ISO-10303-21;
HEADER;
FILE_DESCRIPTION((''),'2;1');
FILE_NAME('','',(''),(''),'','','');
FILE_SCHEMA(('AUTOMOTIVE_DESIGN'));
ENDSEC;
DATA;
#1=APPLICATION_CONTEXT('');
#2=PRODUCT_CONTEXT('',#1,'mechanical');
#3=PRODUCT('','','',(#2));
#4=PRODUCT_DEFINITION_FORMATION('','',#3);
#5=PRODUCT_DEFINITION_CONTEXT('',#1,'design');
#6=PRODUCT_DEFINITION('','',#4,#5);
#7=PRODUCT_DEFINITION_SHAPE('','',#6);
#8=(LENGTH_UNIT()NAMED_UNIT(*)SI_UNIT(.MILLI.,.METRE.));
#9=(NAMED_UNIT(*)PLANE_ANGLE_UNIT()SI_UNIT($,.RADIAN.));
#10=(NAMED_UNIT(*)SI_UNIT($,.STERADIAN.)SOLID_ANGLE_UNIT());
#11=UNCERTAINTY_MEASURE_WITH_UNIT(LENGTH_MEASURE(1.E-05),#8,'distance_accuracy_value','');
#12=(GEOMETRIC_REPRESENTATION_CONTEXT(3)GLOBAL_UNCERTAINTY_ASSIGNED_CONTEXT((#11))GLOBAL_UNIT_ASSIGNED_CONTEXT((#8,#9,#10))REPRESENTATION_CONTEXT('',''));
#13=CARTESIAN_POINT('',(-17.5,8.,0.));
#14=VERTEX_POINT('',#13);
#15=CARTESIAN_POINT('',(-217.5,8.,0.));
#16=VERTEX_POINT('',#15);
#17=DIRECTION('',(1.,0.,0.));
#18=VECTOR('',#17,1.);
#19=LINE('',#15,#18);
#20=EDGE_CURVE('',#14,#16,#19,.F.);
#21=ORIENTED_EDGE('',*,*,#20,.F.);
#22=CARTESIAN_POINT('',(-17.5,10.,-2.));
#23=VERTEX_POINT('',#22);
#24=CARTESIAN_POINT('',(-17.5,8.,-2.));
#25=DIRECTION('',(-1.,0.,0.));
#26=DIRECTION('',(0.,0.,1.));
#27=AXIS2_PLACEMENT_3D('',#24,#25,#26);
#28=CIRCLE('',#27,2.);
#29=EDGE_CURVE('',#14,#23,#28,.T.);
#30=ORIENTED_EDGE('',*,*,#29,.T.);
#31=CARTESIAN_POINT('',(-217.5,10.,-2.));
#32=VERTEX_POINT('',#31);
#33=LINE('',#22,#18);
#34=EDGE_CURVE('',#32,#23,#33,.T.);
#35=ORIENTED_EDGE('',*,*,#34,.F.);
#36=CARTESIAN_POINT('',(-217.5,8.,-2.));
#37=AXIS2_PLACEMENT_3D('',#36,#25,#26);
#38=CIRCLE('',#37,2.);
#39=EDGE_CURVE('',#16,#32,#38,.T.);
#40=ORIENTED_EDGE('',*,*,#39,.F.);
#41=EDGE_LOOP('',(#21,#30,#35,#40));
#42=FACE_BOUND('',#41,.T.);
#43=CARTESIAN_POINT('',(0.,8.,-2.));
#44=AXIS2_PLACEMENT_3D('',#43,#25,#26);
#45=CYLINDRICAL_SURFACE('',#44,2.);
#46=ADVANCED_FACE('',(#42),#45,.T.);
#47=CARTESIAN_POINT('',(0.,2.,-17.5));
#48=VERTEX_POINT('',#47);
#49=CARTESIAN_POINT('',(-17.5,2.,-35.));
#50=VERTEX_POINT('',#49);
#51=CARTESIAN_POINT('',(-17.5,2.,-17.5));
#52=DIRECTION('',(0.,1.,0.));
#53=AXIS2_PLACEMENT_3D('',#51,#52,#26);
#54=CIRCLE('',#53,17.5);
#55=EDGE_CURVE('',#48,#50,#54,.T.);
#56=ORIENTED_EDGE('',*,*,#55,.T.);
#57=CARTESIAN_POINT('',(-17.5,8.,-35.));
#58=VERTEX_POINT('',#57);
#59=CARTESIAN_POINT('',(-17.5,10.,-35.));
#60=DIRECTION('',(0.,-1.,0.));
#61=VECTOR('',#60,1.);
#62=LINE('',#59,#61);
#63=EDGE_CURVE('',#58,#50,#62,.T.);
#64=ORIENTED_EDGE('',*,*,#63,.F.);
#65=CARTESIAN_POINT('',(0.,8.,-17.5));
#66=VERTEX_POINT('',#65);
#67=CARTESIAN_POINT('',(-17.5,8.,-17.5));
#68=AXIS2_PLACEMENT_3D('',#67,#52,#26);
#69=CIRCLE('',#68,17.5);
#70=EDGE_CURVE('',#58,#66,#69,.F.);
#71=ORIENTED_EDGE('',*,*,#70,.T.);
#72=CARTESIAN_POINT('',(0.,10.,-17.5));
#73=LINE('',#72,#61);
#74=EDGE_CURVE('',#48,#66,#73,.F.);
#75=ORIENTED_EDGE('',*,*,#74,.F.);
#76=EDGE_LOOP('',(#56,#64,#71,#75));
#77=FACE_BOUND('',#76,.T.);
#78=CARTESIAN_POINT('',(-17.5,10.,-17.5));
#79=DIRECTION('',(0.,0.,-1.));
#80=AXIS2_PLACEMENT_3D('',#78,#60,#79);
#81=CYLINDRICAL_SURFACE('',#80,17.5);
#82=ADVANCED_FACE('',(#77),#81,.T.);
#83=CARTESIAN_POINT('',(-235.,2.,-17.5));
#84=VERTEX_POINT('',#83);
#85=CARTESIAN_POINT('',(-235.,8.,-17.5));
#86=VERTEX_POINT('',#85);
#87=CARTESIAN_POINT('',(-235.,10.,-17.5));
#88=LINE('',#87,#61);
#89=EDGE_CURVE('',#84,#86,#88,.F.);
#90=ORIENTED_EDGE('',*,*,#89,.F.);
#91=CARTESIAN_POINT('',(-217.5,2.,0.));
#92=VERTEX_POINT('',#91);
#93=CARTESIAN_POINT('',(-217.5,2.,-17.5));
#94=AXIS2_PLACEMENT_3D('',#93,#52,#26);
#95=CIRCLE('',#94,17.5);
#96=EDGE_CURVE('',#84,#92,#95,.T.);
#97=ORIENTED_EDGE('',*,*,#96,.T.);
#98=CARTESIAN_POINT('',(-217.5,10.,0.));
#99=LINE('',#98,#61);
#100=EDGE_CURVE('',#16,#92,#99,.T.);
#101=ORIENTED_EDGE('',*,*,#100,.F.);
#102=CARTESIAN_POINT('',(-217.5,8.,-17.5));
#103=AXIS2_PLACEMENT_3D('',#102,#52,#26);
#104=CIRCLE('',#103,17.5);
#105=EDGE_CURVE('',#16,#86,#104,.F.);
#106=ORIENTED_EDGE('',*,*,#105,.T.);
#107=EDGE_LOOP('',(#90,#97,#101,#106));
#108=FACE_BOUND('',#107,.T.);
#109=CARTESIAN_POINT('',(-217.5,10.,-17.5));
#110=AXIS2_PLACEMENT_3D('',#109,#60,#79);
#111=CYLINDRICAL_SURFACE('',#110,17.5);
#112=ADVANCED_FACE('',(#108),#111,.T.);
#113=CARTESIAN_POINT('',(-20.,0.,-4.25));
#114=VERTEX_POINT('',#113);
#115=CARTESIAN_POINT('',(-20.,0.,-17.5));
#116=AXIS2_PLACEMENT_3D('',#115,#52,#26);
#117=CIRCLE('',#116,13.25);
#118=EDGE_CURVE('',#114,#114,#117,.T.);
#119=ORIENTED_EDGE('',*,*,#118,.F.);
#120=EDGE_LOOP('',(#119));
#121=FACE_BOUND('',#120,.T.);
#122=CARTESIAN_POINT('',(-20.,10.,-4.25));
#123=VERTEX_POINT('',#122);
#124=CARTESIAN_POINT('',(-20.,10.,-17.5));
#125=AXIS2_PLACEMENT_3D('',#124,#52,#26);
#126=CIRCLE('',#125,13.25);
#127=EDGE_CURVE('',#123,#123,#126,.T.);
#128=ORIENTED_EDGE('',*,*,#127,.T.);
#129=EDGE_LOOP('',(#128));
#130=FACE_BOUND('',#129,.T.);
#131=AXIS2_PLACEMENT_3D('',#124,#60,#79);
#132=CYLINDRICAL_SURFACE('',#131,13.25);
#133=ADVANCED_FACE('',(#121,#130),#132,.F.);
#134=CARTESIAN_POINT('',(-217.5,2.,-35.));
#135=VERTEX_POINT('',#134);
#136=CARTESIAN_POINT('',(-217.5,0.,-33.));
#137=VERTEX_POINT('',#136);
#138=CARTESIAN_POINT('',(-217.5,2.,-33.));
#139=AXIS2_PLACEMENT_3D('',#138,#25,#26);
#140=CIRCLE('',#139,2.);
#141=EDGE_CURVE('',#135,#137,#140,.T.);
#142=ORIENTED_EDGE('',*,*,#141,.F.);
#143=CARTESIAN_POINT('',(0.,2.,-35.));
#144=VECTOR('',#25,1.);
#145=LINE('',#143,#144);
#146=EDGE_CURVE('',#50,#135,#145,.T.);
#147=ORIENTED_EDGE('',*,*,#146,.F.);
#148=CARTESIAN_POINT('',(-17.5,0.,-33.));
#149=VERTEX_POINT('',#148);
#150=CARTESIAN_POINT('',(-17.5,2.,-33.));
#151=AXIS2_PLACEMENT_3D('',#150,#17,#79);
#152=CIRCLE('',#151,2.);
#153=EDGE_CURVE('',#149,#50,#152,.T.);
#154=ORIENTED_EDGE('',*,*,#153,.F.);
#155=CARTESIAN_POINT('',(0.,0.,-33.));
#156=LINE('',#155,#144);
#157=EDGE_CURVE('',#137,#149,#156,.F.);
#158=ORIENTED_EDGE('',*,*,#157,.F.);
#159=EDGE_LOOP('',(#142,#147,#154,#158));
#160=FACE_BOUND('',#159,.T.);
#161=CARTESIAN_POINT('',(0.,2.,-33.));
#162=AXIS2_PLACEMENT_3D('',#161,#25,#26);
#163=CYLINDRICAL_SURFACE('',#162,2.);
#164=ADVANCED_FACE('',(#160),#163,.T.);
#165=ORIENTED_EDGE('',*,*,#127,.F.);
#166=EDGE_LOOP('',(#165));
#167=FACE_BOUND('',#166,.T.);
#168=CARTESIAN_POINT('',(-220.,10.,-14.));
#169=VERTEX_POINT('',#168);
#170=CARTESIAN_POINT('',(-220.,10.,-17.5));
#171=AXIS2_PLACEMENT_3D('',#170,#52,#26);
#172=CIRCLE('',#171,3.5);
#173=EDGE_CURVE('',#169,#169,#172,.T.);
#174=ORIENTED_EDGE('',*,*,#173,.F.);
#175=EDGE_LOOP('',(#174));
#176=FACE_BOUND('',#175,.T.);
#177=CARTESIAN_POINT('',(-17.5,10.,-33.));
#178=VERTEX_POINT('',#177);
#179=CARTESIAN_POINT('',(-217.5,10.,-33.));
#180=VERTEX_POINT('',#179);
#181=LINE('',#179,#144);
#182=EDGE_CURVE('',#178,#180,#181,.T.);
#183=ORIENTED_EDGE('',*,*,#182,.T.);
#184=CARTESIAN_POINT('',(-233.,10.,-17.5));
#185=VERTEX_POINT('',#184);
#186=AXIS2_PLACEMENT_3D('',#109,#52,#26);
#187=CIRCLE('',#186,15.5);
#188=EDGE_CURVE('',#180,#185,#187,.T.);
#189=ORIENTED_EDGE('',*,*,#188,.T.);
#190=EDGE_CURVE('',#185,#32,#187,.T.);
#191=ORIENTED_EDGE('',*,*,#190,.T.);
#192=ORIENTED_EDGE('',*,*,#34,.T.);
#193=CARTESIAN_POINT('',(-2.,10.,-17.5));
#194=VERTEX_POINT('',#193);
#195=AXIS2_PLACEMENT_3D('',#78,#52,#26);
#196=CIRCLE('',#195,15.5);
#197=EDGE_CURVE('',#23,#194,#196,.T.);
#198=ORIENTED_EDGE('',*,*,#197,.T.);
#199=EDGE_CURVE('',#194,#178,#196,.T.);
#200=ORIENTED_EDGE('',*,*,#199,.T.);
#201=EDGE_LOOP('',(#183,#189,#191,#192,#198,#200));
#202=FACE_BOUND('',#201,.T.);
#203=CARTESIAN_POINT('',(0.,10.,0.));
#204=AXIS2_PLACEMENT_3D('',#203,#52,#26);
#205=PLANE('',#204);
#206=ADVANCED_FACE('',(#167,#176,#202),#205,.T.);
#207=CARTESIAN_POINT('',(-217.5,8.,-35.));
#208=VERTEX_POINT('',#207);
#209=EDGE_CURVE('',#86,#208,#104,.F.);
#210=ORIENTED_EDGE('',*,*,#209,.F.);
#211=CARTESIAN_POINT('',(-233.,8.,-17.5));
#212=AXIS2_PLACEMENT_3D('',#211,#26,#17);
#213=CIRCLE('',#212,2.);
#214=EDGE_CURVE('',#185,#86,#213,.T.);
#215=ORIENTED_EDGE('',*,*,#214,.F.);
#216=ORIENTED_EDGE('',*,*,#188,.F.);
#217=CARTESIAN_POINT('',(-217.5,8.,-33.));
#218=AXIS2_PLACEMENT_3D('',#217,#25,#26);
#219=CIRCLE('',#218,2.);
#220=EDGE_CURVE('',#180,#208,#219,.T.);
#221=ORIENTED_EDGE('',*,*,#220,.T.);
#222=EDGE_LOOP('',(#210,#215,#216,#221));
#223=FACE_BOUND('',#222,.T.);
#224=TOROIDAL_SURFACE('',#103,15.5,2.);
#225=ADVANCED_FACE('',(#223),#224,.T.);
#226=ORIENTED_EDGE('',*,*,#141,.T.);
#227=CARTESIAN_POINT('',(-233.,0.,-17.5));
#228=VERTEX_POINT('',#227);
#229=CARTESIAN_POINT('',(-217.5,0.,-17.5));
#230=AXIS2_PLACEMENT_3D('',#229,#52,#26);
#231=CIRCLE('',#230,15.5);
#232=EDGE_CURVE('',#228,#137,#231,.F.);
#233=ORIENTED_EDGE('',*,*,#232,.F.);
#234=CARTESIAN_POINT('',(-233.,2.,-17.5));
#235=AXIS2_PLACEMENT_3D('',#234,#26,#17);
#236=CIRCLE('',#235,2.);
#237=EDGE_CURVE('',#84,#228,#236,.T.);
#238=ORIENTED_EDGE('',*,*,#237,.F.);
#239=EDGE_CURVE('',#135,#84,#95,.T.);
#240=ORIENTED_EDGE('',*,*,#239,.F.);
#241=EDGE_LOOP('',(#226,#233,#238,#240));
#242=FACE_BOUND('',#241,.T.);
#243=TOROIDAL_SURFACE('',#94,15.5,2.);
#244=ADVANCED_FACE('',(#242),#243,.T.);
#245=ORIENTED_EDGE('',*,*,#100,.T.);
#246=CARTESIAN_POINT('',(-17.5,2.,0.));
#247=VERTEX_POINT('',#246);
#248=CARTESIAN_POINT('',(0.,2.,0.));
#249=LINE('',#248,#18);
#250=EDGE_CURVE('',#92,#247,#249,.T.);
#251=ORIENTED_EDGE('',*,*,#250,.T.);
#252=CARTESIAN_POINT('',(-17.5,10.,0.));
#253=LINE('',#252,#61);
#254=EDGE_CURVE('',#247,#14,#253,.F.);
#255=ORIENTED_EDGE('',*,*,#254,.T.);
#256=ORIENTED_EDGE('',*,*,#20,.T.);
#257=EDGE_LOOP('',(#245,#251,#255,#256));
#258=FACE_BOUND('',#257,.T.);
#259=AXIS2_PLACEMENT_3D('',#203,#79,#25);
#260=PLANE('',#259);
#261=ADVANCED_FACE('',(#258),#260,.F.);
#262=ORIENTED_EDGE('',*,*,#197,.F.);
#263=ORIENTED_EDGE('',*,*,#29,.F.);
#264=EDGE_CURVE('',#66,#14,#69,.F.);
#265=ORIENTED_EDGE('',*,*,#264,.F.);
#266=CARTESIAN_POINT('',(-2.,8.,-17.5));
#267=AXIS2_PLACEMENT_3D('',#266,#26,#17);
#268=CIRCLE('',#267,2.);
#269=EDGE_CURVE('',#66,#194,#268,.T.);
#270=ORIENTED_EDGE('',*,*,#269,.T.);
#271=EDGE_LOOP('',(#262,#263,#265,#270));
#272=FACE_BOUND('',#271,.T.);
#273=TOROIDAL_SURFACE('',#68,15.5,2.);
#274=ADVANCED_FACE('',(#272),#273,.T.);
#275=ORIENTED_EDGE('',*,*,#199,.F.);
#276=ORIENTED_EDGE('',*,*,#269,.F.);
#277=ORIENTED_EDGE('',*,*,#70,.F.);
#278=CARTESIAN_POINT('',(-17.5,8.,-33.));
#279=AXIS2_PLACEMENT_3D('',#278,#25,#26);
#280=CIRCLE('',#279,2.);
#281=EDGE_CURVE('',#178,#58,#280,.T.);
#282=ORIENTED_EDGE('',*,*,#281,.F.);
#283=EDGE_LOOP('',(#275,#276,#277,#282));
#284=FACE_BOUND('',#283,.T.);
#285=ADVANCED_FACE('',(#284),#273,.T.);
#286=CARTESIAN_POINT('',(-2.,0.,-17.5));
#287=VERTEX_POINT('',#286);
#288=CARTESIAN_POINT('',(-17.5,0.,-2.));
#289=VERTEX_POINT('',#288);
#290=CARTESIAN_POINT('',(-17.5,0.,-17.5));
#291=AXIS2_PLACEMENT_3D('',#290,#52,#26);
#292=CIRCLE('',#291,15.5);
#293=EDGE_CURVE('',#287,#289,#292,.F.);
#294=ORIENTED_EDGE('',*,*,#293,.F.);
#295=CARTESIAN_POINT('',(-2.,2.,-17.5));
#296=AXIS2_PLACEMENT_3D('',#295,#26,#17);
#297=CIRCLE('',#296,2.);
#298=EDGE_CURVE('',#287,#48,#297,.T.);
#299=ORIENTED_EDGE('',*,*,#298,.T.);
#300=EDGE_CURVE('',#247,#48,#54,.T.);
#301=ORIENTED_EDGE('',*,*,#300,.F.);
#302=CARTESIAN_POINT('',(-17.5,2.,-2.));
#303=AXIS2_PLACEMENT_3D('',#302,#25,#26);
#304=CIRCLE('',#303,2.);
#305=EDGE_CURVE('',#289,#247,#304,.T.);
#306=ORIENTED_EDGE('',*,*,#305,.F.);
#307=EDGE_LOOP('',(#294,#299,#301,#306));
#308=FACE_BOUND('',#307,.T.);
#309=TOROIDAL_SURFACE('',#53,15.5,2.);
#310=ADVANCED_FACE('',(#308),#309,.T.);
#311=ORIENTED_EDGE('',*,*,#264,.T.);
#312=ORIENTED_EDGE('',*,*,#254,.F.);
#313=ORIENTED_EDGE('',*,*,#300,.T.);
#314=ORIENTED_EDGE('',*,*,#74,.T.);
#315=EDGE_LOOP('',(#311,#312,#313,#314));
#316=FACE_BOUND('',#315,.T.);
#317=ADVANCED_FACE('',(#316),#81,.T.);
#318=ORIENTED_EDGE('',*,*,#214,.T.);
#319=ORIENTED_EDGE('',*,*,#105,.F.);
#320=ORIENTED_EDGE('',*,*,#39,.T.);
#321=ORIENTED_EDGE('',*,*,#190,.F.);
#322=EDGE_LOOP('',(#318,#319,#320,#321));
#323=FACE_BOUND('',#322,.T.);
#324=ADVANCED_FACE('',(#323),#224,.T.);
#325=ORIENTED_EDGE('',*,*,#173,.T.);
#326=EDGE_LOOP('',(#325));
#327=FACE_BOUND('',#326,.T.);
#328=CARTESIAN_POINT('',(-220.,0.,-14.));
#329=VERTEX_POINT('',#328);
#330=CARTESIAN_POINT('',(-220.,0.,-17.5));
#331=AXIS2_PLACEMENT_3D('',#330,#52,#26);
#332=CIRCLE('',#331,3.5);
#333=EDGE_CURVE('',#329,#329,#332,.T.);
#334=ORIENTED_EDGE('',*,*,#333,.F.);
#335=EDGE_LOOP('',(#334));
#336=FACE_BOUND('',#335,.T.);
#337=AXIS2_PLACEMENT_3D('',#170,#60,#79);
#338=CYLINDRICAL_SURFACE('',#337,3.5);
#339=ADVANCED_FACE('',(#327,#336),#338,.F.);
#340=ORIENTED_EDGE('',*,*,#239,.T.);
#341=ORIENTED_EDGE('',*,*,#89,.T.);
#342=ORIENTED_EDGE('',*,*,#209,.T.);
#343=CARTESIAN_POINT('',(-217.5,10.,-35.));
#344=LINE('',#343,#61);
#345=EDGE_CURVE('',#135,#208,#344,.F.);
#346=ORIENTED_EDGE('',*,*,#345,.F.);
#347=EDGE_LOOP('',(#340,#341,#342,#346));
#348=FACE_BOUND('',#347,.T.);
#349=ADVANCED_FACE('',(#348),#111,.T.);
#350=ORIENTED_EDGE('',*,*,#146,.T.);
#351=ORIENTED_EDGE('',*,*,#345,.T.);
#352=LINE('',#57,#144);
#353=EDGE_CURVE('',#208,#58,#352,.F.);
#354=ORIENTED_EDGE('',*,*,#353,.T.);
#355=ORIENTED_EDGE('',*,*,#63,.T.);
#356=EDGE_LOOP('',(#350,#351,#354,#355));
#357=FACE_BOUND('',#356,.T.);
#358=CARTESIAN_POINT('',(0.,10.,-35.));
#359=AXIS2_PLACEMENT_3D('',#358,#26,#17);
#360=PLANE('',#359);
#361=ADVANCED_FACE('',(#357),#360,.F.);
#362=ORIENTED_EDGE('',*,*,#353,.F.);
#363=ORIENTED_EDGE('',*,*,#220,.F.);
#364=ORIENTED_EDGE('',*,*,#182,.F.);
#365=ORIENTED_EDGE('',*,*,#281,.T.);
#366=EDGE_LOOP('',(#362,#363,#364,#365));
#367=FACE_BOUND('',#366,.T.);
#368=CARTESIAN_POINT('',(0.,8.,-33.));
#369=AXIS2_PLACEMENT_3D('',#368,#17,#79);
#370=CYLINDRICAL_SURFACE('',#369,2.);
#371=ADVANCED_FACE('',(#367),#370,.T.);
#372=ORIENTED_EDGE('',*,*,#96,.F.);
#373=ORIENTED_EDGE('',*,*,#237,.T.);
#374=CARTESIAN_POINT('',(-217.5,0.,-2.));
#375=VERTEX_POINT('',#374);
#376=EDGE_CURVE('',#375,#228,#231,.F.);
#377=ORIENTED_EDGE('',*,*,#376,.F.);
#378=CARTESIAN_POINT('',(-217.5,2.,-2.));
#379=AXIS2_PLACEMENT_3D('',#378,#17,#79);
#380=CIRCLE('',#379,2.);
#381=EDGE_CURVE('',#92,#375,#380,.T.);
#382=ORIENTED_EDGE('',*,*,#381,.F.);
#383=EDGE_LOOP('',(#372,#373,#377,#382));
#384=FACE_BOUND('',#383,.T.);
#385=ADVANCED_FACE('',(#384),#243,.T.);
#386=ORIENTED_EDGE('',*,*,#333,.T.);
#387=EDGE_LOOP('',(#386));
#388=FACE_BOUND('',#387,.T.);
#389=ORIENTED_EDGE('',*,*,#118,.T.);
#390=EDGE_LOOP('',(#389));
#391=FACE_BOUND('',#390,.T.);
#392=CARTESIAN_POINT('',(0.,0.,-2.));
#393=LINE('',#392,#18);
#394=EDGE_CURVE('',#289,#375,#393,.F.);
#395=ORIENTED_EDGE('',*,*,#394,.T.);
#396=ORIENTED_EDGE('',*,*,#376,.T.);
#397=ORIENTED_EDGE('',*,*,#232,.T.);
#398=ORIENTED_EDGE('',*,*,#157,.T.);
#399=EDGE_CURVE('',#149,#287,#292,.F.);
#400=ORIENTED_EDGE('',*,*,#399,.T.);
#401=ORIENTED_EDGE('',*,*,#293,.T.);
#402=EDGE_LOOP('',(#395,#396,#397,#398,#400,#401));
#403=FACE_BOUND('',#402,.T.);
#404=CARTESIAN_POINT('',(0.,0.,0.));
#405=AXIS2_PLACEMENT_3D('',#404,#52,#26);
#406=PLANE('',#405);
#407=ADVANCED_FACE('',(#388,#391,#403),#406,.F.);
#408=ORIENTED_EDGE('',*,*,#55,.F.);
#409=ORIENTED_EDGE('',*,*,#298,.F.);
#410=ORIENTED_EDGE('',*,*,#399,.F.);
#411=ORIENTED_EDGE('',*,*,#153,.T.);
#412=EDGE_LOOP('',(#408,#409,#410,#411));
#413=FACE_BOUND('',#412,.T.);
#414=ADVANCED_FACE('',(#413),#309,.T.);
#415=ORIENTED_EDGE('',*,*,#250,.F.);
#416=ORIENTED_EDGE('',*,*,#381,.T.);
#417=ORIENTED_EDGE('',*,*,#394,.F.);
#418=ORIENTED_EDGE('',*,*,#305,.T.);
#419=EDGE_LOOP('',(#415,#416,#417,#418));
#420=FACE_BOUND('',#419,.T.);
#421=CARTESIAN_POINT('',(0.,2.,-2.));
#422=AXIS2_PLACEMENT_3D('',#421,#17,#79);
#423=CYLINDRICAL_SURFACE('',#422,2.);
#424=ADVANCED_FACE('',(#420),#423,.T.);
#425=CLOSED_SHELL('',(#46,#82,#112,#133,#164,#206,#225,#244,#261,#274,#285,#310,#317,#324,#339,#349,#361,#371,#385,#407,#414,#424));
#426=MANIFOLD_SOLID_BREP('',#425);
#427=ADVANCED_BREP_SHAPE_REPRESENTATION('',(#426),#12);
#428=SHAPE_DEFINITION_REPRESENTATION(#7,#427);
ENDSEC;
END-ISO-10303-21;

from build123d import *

# Parameters (mm, degrees)
CROQUIS1_W              = 235
CROQUIS1_H              = 35
CROQUIS1_R              = 13.25
CROQUIS1_R_2            = 3.5
SALIENTE_EXTRUIR1_DEPTH = 10
REDONDEO1_R             = 17.5
REDONDEO2_R             = 2


with BuildPart() as part:
    # Croquis1 → Saliente-Extruir1 (new body)
    with BuildSketch(Plane(origin=(0, 0, 0), x_dir=(1, 0, 0), z_dir=(0, 1, 0))):
        with Locations((-117.5, 17.5)):
            Rectangle(CROQUIS1_W, CROQUIS1_H)
        with Locations(Location((-20, 17.5, 0), (0, 0, 270))):
            Circle(CROQUIS1_R, mode=Mode.SUBTRACT)
        with Locations(Location((-220, 17.5, 0), (0, 0, 270))):
            Circle(CROQUIS1_R_2, mode=Mode.SUBTRACT)
    extrude(amount=SALIENTE_EXTRUIR1_DEPTH)

    # Redondeo1
    redondeo1_edges = [part.edges().sort_by_distance(p)[0] for p in [
        (0, 5, 0),
        (0, 5, -35),
        (-235, 5, -35),
        (-235, 5, 0),
    ]]
    fillet(redondeo1_edges, radius=REDONDEO1_R - 0.0001)  # a hair under: the kernel refuses the full size

    # Redondeo2
    redondeo2_edges = [part.edges().sort_by_distance(p)[0] for p in [
        (-117.5, 0, 0),
        (-117.5, 0, -35),
        (-229.87439796, 0, -5.12560204),
        (-229.87439796, 0, -29.87439796),
        (-5.12560204, 0, -29.87439796),
        (-5.12560204, 0, -5.12560204),
        (-117.5, 10, 0),
        (-117.5, 10, -35),
        (-229.87439796, 10, -5.12560204),
        (-229.87439796, 10, -29.87439796),
        (-5.12560204, 10, -29.87439796),
        (-5.12560204, 10, -5.12560204),
    ]]
    fillet(redondeo2_edges, radius=REDONDEO2_R)


solid = part.part
